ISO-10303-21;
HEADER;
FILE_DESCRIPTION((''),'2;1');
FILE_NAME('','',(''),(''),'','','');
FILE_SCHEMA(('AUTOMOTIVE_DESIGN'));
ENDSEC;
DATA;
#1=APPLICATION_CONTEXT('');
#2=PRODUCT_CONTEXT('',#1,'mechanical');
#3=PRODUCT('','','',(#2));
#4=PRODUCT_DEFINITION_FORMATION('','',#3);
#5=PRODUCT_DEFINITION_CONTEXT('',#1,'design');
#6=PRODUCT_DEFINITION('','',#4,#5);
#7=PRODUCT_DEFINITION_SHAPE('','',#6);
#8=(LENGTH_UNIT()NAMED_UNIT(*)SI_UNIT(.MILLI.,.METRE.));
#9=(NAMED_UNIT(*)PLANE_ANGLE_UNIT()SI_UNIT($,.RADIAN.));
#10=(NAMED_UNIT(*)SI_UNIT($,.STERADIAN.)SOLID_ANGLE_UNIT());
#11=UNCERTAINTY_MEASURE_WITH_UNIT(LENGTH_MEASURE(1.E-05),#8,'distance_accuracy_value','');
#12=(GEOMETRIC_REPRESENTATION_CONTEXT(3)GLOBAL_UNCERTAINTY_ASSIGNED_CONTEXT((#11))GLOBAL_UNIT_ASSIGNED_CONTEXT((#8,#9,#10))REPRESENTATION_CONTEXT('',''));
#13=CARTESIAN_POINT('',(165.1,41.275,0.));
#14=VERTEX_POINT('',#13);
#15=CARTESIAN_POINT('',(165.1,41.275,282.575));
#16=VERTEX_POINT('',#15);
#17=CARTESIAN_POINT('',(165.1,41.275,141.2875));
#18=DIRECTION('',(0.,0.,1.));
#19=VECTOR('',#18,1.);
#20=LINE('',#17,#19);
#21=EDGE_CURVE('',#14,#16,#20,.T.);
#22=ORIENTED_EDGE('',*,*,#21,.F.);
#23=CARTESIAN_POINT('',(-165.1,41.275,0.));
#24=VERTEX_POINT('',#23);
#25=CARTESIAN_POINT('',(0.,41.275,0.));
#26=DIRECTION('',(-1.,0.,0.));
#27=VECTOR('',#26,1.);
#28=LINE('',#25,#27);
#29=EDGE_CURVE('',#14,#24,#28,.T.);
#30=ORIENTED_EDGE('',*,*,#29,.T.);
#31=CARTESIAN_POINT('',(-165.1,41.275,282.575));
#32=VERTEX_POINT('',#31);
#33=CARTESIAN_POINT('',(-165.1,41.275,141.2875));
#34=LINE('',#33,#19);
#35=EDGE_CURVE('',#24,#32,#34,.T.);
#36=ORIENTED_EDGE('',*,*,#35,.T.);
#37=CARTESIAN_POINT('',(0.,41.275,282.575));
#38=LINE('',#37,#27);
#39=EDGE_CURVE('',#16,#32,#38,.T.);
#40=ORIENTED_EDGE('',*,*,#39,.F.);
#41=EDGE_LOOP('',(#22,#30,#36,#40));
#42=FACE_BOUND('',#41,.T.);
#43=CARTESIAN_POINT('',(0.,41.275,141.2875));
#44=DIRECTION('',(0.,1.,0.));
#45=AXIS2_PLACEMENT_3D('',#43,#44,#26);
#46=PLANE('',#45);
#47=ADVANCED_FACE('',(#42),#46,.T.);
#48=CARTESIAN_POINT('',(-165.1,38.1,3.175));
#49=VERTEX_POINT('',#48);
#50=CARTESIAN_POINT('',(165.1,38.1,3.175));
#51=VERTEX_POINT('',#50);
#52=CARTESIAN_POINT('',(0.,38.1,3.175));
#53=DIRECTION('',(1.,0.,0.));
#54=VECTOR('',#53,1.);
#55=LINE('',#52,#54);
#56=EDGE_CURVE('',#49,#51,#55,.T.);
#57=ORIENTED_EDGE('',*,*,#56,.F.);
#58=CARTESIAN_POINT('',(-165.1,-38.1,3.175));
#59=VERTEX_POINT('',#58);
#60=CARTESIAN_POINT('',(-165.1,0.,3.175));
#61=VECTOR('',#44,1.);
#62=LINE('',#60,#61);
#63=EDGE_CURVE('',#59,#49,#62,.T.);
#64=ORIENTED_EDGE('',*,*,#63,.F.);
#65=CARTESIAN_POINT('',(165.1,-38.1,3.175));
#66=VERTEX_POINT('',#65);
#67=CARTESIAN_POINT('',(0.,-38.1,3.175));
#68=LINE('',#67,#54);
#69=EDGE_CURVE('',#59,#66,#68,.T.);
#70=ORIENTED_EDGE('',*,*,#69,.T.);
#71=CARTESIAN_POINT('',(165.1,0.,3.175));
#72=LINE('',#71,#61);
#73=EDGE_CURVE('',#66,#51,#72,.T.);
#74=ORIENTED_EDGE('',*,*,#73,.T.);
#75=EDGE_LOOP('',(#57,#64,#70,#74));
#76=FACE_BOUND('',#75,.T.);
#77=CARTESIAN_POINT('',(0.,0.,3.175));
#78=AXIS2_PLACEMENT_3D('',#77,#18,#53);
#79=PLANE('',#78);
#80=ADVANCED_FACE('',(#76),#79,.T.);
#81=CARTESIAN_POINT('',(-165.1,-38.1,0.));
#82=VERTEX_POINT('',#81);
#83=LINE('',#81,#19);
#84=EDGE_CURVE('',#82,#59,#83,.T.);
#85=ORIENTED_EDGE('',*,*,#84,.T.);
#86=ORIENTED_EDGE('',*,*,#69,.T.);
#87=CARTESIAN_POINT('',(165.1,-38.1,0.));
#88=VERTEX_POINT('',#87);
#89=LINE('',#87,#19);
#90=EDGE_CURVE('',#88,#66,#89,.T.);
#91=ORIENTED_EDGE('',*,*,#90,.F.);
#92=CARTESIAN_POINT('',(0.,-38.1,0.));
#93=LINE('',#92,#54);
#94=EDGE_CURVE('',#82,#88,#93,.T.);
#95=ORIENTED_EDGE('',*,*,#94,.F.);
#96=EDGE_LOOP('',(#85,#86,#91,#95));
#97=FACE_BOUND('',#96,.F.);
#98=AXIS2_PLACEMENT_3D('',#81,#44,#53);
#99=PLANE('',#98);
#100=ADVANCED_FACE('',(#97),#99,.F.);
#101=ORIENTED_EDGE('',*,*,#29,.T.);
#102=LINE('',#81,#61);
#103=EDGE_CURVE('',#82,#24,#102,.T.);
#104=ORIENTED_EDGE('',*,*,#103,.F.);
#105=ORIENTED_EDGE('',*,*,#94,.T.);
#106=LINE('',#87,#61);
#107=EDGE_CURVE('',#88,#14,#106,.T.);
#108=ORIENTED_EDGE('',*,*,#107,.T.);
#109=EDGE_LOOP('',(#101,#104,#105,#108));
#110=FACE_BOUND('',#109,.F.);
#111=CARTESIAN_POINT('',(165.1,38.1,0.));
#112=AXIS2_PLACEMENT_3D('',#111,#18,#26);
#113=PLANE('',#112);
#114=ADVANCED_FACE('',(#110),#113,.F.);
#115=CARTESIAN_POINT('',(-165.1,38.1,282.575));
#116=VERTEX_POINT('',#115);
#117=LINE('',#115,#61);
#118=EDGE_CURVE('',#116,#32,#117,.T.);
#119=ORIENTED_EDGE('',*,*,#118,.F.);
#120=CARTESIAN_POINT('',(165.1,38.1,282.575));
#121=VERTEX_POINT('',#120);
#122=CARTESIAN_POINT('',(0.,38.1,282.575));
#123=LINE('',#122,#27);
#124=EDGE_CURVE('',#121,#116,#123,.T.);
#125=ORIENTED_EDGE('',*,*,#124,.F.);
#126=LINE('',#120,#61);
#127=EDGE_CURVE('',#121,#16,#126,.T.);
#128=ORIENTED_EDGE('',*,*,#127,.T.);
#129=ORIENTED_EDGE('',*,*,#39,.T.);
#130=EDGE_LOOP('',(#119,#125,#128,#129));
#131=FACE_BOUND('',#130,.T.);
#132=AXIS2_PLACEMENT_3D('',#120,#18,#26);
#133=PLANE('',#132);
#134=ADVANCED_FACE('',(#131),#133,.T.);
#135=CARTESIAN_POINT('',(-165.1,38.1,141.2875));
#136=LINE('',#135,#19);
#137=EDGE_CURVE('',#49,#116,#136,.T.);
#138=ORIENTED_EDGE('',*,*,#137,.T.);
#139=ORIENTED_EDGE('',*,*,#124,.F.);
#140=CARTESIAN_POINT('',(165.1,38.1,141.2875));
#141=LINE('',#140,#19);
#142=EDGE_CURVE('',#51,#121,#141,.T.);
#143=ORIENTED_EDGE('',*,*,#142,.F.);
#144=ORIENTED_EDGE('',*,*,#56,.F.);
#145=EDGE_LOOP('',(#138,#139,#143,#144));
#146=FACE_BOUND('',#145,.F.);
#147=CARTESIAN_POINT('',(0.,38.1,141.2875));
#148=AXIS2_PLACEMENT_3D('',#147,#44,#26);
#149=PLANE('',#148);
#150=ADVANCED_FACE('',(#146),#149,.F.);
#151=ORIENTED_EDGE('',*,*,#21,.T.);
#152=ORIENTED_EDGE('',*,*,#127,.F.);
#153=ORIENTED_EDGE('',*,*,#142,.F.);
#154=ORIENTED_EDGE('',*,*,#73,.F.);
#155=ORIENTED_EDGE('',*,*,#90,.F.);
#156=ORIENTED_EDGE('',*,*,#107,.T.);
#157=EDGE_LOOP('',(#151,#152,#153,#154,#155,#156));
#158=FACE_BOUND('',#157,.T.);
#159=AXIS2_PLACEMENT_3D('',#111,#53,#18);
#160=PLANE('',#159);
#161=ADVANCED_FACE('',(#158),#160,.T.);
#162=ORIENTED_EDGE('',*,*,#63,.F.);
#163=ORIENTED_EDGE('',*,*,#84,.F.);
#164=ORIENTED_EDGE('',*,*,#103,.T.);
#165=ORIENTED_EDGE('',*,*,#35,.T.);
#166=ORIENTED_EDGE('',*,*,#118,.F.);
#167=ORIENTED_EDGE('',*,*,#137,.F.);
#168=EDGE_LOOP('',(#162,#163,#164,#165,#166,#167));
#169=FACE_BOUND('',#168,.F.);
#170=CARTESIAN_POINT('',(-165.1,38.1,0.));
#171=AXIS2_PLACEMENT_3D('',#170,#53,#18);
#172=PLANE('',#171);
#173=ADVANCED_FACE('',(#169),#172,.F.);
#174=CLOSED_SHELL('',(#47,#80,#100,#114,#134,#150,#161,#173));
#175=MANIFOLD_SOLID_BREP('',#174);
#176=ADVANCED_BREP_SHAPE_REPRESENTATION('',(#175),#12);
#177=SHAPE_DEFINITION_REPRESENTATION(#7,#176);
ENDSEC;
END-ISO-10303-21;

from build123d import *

# Parameters (mm, degrees)
F0_W     = 330.2
F0_H     = 76.2
F1_DEPTH = 3.175
F2_W     = 330.2
F2_H     = 282.575
F3_DEPTH = 3.175


# Not quite as in the source:
# - a length typed as a fraction of an inch, garbled in the dataset ("3 / 203.2 mm" for 3/8 in), is restored


with BuildPart() as f1:
    # F0 (on Top) → F1 (new body)
    with BuildSketch(Plane.XY):
        Rectangle(F0_W, F0_H)
    extrude(amount=F1_DEPTH)

    # F2 (on face) → F3 (join)
    with BuildSketch(Plane(origin=(0, 38.1, 0), x_dir=(-1, 0, 0), z_dir=(0, 1, 0))):
        with Locations((0, 141.2875)):
            Rectangle(F2_W, F2_H)
    extrude(amount=F3_DEPTH)


solid = f1.part
